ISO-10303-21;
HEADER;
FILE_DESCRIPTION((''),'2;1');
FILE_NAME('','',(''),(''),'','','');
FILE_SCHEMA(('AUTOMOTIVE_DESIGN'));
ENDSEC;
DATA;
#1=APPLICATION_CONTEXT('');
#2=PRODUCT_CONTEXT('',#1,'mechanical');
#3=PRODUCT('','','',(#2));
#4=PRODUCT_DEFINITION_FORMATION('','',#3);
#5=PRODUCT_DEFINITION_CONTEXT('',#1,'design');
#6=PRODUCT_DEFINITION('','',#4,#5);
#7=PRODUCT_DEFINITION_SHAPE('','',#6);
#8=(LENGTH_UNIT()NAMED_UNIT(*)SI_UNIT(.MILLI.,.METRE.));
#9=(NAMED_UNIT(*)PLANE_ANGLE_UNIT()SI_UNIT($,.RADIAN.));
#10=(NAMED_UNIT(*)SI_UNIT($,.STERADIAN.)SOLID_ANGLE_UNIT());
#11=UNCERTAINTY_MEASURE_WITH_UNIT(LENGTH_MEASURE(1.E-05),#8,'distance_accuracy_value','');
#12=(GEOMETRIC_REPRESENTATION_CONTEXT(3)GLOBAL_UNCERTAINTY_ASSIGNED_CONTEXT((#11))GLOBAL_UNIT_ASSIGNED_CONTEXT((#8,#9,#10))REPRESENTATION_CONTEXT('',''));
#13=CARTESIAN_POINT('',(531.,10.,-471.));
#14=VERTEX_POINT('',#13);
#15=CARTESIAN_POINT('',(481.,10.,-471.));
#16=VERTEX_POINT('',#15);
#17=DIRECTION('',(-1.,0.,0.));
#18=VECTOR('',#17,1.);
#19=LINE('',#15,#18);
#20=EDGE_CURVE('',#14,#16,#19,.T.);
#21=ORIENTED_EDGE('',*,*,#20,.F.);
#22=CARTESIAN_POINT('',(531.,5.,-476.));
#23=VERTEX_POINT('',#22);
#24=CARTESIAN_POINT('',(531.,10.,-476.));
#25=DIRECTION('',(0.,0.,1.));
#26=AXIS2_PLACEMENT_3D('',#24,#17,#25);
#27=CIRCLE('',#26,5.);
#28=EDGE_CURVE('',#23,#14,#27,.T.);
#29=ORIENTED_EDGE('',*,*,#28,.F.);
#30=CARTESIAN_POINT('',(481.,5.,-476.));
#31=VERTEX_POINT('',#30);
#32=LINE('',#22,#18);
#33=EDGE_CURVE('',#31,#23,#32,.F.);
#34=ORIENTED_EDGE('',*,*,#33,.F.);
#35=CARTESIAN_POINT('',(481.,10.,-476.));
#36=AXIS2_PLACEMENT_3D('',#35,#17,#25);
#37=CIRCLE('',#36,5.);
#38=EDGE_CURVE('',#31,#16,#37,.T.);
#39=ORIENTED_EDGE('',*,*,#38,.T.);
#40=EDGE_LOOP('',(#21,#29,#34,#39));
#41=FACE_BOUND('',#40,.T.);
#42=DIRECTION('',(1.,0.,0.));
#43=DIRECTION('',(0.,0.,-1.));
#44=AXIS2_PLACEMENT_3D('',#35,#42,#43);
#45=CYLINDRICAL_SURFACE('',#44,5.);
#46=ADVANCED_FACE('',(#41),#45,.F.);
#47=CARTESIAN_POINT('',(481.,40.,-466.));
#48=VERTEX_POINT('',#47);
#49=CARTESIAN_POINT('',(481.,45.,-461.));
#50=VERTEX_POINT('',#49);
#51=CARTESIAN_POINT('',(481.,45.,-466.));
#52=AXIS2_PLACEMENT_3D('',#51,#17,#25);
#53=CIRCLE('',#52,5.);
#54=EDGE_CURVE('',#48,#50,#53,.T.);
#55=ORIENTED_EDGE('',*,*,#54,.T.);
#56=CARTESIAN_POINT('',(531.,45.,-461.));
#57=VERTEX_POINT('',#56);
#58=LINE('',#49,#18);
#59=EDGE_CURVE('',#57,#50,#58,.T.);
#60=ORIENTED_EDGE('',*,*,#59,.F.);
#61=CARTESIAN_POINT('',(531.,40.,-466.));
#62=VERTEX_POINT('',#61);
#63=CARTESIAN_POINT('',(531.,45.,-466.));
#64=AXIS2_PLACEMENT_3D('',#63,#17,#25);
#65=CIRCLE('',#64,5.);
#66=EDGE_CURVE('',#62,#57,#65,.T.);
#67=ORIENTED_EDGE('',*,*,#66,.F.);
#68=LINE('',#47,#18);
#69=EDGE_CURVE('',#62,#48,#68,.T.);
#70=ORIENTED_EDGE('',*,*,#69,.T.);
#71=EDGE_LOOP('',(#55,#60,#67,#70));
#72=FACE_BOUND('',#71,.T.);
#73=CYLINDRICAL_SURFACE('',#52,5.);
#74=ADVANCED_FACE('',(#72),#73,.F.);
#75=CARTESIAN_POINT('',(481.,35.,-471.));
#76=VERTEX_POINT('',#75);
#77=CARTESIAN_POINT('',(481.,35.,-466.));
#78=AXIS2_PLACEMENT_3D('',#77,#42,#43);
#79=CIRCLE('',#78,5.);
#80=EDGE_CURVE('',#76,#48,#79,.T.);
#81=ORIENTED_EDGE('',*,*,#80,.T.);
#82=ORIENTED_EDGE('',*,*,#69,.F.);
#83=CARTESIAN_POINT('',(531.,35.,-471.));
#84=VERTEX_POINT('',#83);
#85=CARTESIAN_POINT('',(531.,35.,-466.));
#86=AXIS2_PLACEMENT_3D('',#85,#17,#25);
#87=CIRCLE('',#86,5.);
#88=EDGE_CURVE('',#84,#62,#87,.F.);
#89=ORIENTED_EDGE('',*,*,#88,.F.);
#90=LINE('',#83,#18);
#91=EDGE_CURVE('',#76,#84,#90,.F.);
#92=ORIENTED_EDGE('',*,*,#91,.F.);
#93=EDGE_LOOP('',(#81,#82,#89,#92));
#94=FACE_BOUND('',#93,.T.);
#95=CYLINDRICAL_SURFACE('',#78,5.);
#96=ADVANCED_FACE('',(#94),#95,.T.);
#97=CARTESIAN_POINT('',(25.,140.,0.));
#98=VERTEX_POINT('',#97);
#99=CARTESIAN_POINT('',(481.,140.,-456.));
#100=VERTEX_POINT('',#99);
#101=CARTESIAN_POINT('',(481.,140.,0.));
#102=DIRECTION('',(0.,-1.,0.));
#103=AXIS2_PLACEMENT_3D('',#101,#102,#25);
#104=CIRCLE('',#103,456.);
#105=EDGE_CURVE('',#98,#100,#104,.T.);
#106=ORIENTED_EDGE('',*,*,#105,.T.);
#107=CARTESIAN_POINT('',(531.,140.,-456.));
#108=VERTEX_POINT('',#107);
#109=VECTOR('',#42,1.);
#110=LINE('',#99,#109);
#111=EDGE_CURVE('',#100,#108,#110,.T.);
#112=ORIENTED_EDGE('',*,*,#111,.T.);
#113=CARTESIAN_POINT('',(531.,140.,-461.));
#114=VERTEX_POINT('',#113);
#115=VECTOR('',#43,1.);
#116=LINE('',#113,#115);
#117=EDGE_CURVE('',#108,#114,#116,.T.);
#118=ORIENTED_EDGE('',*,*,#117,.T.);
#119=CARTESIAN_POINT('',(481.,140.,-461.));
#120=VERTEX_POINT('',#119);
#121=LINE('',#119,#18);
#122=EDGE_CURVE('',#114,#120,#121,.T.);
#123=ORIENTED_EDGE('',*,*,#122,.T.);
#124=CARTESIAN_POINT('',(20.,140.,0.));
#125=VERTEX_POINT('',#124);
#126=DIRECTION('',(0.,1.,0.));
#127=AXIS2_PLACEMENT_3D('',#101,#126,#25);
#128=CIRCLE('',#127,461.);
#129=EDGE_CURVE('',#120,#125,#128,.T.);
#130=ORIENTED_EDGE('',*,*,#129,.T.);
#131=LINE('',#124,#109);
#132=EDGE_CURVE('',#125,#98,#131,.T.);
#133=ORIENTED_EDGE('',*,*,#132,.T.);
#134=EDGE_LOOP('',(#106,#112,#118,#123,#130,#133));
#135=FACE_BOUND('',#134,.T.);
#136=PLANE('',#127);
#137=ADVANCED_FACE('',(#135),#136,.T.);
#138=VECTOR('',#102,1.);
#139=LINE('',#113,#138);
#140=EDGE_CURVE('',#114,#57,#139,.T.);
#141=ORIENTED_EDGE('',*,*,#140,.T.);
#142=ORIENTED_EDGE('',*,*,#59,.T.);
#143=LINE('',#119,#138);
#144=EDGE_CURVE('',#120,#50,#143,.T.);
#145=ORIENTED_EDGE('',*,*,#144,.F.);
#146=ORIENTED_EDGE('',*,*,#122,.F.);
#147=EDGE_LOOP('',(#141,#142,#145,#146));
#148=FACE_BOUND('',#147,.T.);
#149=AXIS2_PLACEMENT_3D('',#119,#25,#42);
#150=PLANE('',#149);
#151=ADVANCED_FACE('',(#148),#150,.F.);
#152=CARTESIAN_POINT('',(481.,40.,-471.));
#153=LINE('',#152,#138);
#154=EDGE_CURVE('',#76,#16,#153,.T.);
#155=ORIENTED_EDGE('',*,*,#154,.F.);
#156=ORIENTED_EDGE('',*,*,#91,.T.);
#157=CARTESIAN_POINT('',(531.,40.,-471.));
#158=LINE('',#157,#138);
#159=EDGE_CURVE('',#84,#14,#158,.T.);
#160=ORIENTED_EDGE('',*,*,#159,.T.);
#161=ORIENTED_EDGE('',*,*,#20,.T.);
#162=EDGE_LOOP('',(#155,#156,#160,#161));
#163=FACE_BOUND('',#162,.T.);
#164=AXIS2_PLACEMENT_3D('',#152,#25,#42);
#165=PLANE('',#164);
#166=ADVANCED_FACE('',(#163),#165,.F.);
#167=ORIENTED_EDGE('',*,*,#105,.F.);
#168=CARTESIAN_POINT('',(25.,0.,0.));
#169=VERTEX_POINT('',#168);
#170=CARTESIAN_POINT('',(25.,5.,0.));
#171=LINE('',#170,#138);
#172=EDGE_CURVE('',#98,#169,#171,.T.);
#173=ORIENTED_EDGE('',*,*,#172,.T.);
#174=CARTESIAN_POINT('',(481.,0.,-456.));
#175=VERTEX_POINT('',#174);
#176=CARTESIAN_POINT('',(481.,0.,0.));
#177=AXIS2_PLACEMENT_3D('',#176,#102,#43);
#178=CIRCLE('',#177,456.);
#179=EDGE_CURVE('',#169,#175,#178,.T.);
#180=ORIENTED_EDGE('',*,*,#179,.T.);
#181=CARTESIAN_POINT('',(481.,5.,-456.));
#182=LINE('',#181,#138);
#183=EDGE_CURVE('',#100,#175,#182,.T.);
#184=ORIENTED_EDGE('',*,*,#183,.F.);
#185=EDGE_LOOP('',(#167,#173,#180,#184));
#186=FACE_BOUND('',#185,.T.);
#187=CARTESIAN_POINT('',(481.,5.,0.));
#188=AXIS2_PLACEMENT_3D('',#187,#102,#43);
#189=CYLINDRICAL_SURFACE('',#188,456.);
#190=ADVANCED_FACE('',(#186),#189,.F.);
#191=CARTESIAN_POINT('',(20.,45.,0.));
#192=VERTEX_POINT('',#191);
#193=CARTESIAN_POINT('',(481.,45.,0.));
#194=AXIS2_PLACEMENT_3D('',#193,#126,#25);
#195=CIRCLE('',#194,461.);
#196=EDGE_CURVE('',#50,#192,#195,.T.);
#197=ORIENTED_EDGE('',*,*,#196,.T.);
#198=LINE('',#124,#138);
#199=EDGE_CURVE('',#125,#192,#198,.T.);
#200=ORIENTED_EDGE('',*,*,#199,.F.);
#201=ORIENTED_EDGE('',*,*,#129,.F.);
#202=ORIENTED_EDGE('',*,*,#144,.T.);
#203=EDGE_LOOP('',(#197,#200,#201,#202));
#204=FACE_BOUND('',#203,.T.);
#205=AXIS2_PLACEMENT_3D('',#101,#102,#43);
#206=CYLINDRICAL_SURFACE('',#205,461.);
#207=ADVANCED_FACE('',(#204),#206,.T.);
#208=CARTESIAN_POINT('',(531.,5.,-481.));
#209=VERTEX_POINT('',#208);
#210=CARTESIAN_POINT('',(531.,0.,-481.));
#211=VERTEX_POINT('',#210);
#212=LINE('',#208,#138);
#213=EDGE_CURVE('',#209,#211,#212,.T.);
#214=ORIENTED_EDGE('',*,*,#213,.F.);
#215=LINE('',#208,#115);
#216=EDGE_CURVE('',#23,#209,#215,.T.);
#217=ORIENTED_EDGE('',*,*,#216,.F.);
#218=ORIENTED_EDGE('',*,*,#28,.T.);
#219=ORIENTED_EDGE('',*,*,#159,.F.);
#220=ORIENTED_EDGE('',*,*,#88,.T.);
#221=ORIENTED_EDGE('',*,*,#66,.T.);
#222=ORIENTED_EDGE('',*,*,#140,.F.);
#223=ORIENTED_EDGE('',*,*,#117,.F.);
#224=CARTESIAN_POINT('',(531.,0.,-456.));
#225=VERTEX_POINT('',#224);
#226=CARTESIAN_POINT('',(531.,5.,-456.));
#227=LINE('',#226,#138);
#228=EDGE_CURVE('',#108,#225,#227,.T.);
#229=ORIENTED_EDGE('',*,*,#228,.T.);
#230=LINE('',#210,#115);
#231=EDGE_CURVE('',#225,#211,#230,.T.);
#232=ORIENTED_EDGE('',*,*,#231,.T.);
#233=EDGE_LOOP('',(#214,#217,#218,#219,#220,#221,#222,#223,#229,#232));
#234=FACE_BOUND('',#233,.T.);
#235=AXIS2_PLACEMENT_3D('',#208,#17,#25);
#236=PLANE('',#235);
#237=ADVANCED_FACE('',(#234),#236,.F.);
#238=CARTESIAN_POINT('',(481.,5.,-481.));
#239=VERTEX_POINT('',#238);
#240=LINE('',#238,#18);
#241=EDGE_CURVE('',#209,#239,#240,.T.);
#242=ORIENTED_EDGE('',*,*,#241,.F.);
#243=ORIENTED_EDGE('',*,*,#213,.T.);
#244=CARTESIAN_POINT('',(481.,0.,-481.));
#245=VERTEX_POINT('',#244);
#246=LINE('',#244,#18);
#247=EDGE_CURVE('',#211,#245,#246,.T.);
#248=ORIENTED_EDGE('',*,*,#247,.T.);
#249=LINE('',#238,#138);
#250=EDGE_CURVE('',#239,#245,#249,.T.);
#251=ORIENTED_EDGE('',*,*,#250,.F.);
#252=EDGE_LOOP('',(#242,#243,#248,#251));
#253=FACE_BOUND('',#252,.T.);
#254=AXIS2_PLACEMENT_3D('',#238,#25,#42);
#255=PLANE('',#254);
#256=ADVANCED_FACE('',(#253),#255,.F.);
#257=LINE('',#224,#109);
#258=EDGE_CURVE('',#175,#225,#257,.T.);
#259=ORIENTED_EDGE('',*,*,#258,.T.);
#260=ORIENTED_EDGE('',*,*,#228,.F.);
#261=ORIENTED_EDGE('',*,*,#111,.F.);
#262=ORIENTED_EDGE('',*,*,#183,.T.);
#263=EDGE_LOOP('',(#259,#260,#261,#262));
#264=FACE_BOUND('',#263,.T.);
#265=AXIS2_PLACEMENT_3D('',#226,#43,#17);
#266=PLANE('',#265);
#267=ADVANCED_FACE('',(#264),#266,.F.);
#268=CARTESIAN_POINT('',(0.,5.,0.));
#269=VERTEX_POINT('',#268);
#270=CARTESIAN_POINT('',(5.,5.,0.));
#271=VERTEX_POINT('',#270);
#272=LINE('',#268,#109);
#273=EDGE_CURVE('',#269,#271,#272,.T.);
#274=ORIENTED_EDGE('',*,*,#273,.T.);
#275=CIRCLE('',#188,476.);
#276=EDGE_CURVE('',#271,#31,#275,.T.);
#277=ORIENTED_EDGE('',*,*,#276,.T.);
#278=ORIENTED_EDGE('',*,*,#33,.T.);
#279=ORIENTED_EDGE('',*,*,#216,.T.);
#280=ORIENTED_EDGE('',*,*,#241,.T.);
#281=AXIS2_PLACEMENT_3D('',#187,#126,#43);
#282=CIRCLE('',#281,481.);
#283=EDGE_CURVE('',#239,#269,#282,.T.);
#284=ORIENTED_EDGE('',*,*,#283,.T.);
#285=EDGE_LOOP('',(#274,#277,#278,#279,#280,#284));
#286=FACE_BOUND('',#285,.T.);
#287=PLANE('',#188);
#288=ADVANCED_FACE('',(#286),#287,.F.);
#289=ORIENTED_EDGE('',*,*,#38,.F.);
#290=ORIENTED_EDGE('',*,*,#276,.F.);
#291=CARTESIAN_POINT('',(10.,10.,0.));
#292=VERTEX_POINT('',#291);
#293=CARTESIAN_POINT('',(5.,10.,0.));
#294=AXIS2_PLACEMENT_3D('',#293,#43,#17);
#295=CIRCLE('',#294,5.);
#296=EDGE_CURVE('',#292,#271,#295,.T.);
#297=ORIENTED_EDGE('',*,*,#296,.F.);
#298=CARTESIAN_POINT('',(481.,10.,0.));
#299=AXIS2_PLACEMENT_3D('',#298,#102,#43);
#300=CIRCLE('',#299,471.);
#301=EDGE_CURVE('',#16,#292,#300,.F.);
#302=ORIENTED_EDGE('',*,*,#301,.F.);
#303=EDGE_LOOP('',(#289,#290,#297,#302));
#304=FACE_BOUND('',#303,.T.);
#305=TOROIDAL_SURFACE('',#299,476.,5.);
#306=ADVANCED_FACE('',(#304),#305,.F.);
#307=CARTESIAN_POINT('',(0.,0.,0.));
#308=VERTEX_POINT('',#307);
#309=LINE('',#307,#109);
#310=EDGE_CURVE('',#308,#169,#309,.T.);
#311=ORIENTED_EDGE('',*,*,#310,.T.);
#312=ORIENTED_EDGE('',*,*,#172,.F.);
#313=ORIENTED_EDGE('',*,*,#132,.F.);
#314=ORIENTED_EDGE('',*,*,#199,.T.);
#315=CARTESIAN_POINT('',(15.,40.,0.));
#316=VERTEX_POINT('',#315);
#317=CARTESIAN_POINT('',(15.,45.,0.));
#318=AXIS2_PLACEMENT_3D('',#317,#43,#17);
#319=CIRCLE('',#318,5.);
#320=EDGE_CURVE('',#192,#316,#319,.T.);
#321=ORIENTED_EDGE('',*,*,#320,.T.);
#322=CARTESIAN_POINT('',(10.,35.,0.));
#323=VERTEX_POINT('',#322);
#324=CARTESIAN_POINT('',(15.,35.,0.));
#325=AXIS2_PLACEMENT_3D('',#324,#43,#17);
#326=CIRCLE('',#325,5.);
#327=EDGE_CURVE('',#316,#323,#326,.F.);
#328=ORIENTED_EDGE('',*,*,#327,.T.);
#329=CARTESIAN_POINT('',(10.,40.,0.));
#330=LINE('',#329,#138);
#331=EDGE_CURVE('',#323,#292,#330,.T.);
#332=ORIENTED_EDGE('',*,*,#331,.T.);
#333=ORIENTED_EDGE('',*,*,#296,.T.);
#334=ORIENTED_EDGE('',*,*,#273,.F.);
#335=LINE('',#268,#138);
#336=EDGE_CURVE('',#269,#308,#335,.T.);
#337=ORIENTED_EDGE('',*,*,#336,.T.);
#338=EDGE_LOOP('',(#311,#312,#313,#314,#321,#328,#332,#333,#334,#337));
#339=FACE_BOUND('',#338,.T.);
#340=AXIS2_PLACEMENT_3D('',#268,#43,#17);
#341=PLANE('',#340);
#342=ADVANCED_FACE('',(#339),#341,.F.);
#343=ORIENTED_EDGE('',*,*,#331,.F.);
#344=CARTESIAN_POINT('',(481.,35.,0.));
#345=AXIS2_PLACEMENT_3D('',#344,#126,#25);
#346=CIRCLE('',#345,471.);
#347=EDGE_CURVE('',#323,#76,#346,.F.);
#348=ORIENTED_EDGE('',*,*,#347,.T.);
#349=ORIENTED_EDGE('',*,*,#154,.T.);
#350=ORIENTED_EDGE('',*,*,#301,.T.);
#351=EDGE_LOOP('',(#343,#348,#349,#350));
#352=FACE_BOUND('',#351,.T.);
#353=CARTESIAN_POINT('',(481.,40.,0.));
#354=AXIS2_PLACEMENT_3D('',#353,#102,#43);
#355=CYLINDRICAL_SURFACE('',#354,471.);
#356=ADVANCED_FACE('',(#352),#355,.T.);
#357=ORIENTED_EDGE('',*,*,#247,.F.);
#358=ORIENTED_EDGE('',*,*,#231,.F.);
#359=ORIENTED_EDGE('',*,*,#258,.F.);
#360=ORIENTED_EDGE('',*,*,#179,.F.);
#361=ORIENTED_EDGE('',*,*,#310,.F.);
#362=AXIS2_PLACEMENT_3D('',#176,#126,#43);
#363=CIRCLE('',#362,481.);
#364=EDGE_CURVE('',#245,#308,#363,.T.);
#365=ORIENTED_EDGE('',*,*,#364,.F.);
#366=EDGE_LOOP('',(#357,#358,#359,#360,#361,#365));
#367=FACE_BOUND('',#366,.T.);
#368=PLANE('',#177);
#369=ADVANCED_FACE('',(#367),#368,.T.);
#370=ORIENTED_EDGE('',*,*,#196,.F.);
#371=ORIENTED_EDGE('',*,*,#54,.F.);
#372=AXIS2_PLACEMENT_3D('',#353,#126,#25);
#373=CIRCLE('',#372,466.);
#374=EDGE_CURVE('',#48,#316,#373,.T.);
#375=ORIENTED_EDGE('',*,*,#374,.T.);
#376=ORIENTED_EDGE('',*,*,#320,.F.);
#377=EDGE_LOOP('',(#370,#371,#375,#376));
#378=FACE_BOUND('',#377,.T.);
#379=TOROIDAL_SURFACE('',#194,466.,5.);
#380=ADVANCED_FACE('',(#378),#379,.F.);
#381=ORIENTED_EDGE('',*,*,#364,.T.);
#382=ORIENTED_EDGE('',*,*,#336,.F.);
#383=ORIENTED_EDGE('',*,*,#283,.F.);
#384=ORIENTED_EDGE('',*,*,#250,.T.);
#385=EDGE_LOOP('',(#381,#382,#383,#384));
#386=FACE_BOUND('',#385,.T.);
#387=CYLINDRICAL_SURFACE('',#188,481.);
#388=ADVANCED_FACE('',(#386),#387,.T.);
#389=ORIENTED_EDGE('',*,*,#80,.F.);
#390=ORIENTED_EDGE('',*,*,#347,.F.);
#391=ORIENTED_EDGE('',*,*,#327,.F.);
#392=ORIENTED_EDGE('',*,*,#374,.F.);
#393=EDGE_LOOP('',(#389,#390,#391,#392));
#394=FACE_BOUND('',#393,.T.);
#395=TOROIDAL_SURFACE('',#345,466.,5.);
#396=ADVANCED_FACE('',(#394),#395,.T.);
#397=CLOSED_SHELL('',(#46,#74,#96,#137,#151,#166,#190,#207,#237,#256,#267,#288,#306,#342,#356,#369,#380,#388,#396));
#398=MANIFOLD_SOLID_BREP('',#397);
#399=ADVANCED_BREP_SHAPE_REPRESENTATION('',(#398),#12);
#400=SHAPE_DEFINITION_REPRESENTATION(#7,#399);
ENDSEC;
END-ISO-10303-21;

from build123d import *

# Parameters (mm, degrees)
BOTTOM_LEVEL_DEPTH = 5
MID_LEVEL_DEPTH    = 35
GUARD_RAIL_DEPTH   = 100
ROUNDING_R         = 5


with BuildPart() as part:
    # Sketch1 → Bottom level (new body)
    with BuildSketch(Plane(origin=(0, 0, 0), x_dir=(1, 0, 0), z_dir=(0, 1, 0))):
        with BuildLine():
            Line((481, 481), (531, 481))
            Line((531, 481), (531, 456))
            Line((531, 456), (481, 456))
            ThreePointArc((481, 456), (158.559307779, 322.440692221), (25, 0))
            Line((25, 0), (0, 0))
            ThreePointArc((0, 0), (140.881638249, 340.118361751), (481, 481))
        make_face()
    extrude(amount=BOTTOM_LEVEL_DEPTH)

    # Sketch2 → Mid level (add)
    with BuildSketch(Plane(origin=(0, 5, 0), x_dir=(1, 0, 0), z_dir=(0, 1, 0))):
        with BuildLine():
            Line((481, 456), (531, 456))
            Line((531, 456), (531, 471))
            Line((531, 471), (481, 471))
            ThreePointArc((481, 471), (147.952706061, 333.047293939), (10, 0))
            Line((10, 0), (25, 0))
            ThreePointArc((25, 0), (158.559307779, 322.440692221), (481, 456))
        make_face()
    extrude(amount=MID_LEVEL_DEPTH)

    # Sketch3 → Guard rail (add)
    with BuildSketch(Plane(origin=(0, 40, 0), x_dir=(1, 0, 0), z_dir=(0, 1, 0))):
        with BuildLine():
            Line((481, 456), (531, 456))
            Line((531, 456), (531, 461))
            Line((531, 461), (481, 461))
            ThreePointArc((481, 461), (155.023773873, 325.976226127), (20, 0))
            Line((20, 0), (25, 0))
            ThreePointArc((25, 0), (158.559307779, 322.440692221), (481, 456))
        make_face()
    extrude(amount=GUARD_RAIL_DEPTH)

    # Rounding
    rounding_edges = [part.edges().sort_by_distance(p)[0] for p in [
        (506, 40, -461),
        (506, 40, -471),
        (506, 5, -471),
        (155.023773873, 40, -325.976226127),
        (147.952706061, 40, -333.047293939),
        (147.952706061, 5, -333.047293939),
    ]]
    fillet(rounding_edges, radius=ROUNDING_R - 0.0001)  # a hair under: the kernel refuses the full size


solid = part.part
